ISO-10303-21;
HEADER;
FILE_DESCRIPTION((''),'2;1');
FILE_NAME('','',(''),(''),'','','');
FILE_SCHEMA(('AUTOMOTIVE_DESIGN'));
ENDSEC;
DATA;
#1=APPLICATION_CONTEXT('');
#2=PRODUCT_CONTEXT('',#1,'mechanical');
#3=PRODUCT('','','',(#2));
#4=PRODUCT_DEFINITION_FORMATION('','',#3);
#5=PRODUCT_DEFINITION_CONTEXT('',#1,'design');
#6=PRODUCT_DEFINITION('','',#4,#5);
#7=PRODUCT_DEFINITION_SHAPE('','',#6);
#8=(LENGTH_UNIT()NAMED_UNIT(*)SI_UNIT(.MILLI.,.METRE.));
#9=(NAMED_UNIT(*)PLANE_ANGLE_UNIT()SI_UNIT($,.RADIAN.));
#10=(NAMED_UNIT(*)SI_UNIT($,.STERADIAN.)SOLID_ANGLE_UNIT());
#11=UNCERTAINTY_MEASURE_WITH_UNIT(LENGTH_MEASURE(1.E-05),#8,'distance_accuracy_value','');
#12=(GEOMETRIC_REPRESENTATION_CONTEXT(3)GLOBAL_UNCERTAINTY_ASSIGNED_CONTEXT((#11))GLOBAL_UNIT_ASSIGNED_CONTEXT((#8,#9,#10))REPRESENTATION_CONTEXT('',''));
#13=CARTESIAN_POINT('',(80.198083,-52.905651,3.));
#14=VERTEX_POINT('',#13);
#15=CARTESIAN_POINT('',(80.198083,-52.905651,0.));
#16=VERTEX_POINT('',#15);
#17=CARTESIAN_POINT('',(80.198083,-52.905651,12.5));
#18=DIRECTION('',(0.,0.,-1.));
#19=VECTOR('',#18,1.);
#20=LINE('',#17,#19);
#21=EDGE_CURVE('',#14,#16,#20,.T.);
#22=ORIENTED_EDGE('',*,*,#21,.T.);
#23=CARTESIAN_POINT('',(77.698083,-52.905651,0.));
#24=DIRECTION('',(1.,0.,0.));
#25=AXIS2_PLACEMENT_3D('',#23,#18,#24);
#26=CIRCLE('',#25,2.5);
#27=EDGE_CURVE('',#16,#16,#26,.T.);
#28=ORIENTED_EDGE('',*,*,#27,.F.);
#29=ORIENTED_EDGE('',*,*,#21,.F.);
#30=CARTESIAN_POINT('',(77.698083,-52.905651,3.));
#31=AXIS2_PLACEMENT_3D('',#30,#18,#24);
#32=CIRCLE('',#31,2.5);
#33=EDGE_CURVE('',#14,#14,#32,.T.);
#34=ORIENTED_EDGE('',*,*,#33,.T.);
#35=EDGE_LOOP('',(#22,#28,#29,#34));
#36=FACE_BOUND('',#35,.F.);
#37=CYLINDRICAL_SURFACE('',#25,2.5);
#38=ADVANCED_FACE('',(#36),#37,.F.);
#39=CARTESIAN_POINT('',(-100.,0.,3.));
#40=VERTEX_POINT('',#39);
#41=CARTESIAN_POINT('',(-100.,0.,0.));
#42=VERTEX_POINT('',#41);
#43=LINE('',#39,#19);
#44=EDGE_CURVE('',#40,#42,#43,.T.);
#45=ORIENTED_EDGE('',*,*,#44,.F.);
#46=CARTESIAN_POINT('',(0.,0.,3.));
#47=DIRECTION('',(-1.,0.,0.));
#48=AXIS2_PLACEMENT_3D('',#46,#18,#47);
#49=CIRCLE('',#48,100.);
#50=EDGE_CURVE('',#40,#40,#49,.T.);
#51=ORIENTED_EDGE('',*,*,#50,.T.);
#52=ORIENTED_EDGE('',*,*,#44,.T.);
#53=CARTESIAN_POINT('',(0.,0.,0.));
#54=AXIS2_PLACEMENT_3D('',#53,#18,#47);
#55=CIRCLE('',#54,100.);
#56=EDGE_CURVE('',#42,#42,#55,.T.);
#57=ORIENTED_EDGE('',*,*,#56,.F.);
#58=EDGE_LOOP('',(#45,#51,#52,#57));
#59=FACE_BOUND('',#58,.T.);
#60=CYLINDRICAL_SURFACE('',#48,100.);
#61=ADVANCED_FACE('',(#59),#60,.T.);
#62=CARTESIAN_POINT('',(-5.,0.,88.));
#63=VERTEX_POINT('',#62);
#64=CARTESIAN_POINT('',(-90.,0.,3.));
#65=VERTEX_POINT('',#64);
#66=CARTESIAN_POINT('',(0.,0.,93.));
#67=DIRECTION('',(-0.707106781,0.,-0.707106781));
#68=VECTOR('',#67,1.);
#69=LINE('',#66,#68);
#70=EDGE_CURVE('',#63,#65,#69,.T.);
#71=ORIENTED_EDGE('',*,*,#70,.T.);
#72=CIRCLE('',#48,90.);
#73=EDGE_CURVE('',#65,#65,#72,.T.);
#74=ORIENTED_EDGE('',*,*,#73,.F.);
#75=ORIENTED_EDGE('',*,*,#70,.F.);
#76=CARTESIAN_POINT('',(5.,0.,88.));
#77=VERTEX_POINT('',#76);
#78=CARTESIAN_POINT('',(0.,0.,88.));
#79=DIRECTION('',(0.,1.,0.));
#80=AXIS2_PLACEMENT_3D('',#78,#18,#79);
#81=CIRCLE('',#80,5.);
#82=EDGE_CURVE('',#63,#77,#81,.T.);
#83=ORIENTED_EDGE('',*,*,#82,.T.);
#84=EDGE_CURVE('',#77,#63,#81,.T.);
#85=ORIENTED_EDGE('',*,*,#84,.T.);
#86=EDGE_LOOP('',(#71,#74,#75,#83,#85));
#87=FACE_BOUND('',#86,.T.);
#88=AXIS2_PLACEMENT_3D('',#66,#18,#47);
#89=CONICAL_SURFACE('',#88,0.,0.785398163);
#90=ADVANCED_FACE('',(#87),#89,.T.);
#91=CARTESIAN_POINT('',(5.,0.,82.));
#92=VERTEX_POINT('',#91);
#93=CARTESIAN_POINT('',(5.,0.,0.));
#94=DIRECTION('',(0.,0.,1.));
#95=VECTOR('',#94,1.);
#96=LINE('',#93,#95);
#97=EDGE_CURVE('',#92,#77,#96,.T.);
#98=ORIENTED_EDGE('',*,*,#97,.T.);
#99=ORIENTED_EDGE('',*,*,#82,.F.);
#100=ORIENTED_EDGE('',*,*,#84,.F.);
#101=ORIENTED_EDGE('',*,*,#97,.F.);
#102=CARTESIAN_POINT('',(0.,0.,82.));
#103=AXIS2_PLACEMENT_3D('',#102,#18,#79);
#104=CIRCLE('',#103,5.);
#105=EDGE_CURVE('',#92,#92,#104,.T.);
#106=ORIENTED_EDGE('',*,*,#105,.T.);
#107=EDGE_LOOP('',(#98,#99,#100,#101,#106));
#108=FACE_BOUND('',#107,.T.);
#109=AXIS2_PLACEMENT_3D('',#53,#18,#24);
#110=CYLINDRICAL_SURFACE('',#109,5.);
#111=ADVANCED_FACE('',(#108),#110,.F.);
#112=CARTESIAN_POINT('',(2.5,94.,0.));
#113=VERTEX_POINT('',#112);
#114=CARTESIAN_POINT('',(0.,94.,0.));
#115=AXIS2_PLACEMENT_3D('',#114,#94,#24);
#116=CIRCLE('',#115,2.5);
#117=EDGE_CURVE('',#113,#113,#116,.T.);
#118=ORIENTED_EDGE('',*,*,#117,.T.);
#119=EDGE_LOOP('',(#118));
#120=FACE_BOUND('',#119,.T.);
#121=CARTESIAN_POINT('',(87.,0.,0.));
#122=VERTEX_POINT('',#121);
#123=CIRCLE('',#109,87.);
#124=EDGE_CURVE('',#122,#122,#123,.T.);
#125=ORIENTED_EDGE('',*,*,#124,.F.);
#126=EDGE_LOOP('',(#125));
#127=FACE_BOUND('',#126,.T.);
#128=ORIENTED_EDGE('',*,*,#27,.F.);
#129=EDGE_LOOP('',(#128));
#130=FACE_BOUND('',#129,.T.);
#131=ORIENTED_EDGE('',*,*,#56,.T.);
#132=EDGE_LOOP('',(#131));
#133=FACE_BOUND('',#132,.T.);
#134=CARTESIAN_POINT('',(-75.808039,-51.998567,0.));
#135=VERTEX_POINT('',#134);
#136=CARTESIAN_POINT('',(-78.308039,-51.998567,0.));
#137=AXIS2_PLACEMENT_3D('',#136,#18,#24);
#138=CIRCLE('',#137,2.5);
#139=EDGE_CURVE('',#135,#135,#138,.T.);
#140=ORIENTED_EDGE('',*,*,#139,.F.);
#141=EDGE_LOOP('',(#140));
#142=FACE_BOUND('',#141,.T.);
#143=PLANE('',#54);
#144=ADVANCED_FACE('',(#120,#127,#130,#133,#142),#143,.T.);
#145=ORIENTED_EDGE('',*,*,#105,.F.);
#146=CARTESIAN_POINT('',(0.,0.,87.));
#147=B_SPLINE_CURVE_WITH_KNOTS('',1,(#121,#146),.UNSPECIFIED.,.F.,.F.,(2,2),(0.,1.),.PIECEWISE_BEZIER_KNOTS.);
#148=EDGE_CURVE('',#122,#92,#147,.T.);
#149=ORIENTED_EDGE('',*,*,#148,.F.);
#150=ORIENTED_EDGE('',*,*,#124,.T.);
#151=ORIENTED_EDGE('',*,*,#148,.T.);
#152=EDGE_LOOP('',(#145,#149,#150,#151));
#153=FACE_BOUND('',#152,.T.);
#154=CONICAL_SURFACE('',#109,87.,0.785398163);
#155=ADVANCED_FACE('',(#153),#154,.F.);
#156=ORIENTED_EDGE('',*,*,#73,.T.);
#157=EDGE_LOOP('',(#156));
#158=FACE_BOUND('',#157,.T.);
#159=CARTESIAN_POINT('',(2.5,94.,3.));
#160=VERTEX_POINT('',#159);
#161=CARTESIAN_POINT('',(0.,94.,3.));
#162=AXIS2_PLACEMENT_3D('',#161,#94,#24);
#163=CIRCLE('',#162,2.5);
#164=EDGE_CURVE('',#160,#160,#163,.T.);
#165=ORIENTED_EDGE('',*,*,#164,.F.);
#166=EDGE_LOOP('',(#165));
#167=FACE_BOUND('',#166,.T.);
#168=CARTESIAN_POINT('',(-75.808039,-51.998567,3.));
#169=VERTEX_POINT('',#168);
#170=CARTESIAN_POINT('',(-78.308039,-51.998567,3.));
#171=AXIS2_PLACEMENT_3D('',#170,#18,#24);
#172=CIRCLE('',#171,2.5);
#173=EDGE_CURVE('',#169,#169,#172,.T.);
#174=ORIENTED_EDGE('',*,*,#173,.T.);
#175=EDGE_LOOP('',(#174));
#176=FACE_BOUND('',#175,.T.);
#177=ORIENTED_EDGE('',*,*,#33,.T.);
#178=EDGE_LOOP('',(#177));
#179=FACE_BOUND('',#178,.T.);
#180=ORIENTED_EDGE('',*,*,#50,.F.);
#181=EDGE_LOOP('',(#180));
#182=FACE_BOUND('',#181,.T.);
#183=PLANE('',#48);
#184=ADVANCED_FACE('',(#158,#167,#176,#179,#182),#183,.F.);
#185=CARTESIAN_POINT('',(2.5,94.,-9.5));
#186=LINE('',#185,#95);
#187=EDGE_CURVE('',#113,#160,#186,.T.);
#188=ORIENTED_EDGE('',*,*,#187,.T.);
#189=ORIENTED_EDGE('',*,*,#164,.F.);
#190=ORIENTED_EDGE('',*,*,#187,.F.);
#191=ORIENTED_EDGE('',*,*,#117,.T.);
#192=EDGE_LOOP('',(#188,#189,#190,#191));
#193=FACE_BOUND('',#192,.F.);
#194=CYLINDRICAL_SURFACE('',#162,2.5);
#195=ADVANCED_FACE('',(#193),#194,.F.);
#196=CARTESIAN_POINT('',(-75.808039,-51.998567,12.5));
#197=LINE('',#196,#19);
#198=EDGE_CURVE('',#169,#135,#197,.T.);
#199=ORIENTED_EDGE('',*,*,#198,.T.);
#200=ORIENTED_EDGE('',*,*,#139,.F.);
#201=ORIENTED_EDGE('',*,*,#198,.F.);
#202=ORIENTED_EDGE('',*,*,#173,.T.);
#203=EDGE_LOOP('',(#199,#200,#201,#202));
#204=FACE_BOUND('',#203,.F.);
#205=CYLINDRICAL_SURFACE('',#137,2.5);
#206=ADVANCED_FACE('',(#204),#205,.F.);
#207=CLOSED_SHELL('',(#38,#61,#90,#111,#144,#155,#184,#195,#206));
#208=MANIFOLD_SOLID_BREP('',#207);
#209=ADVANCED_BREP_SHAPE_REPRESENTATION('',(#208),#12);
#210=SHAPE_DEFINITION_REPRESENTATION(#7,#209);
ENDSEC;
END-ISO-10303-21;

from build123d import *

# Parameters (mm, degrees)
F2_R      = 87
F4_R      = 5
F5_DEPTH  = 93.001
F6_R      = 2.5
F7_DEPTH  = 12.5
F8_R      = 2.5
F9_DEPTH  = 12.5
F10_R     = 2.5
F11_DEPTH = 12.5


# Not quite as in the source:
# - an extrude whose draft closes it to a point is written as a loft to that point


with BuildPart() as f1:
    # F0 (on Front) → F1 (revolve)
    with BuildSketch(Plane.XZ):
        Polygon((-100, 0), (0, 0), (0, 93), (-90, 3), (-100, 3), align=None)
    revolve(axis=Axis((0, 0, 46.5), (0, 0, -1)))

    # F2 (on face) → F3 section 0
    with BuildSketch(Plane(origin=(0, 0, 0), x_dir=(1, 0, 0), z_dir=(0, 0, -1)), mode=Mode.PRIVATE) as f3_s0:
        Circle(F2_R)
    loft([f3_s0.sketch, Vertex(0, 0, 87)], ruled=True, mode=Mode.SUBTRACT)

    # F4 (on Top) → F5 (cut, through all)
    with BuildSketch(Plane.XY):
        Circle(F4_R)
    extrude(amount=F5_DEPTH, mode=Mode.SUBTRACT)

    # F6 (on face) → F7 (cut, symmetric)
    with BuildSketch(Plane.XY.offset(3)):
        with Locations((0, 94)):
            Circle(F6_R)
    extrude(amount=F7_DEPTH, both=True, mode=Mode.SUBTRACT)

    # F8 (on face) → F9 (cut, symmetric)
    with BuildSketch(Plane(origin=(0, 0, 0), x_dir=(1, 0, 0), z_dir=(0, 0, -1))):
        with Locations((-78.3080390386, 51.9985674988)):
            Circle(F8_R)
    extrude(amount=F9_DEPTH, both=True, mode=Mode.SUBTRACT)

    # F10 (on face) → F11 (cut, symmetric)
    with BuildSketch(Plane(origin=(0, 0, 0), x_dir=(1, 0, 0), z_dir=(0, 0, -1))):
        with Locations((77.6980827138, 52.9056513294)):
            Circle(F10_R)
    extrude(amount=F11_DEPTH, both=True, mode=Mode.SUBTRACT)


solid = f1.part
